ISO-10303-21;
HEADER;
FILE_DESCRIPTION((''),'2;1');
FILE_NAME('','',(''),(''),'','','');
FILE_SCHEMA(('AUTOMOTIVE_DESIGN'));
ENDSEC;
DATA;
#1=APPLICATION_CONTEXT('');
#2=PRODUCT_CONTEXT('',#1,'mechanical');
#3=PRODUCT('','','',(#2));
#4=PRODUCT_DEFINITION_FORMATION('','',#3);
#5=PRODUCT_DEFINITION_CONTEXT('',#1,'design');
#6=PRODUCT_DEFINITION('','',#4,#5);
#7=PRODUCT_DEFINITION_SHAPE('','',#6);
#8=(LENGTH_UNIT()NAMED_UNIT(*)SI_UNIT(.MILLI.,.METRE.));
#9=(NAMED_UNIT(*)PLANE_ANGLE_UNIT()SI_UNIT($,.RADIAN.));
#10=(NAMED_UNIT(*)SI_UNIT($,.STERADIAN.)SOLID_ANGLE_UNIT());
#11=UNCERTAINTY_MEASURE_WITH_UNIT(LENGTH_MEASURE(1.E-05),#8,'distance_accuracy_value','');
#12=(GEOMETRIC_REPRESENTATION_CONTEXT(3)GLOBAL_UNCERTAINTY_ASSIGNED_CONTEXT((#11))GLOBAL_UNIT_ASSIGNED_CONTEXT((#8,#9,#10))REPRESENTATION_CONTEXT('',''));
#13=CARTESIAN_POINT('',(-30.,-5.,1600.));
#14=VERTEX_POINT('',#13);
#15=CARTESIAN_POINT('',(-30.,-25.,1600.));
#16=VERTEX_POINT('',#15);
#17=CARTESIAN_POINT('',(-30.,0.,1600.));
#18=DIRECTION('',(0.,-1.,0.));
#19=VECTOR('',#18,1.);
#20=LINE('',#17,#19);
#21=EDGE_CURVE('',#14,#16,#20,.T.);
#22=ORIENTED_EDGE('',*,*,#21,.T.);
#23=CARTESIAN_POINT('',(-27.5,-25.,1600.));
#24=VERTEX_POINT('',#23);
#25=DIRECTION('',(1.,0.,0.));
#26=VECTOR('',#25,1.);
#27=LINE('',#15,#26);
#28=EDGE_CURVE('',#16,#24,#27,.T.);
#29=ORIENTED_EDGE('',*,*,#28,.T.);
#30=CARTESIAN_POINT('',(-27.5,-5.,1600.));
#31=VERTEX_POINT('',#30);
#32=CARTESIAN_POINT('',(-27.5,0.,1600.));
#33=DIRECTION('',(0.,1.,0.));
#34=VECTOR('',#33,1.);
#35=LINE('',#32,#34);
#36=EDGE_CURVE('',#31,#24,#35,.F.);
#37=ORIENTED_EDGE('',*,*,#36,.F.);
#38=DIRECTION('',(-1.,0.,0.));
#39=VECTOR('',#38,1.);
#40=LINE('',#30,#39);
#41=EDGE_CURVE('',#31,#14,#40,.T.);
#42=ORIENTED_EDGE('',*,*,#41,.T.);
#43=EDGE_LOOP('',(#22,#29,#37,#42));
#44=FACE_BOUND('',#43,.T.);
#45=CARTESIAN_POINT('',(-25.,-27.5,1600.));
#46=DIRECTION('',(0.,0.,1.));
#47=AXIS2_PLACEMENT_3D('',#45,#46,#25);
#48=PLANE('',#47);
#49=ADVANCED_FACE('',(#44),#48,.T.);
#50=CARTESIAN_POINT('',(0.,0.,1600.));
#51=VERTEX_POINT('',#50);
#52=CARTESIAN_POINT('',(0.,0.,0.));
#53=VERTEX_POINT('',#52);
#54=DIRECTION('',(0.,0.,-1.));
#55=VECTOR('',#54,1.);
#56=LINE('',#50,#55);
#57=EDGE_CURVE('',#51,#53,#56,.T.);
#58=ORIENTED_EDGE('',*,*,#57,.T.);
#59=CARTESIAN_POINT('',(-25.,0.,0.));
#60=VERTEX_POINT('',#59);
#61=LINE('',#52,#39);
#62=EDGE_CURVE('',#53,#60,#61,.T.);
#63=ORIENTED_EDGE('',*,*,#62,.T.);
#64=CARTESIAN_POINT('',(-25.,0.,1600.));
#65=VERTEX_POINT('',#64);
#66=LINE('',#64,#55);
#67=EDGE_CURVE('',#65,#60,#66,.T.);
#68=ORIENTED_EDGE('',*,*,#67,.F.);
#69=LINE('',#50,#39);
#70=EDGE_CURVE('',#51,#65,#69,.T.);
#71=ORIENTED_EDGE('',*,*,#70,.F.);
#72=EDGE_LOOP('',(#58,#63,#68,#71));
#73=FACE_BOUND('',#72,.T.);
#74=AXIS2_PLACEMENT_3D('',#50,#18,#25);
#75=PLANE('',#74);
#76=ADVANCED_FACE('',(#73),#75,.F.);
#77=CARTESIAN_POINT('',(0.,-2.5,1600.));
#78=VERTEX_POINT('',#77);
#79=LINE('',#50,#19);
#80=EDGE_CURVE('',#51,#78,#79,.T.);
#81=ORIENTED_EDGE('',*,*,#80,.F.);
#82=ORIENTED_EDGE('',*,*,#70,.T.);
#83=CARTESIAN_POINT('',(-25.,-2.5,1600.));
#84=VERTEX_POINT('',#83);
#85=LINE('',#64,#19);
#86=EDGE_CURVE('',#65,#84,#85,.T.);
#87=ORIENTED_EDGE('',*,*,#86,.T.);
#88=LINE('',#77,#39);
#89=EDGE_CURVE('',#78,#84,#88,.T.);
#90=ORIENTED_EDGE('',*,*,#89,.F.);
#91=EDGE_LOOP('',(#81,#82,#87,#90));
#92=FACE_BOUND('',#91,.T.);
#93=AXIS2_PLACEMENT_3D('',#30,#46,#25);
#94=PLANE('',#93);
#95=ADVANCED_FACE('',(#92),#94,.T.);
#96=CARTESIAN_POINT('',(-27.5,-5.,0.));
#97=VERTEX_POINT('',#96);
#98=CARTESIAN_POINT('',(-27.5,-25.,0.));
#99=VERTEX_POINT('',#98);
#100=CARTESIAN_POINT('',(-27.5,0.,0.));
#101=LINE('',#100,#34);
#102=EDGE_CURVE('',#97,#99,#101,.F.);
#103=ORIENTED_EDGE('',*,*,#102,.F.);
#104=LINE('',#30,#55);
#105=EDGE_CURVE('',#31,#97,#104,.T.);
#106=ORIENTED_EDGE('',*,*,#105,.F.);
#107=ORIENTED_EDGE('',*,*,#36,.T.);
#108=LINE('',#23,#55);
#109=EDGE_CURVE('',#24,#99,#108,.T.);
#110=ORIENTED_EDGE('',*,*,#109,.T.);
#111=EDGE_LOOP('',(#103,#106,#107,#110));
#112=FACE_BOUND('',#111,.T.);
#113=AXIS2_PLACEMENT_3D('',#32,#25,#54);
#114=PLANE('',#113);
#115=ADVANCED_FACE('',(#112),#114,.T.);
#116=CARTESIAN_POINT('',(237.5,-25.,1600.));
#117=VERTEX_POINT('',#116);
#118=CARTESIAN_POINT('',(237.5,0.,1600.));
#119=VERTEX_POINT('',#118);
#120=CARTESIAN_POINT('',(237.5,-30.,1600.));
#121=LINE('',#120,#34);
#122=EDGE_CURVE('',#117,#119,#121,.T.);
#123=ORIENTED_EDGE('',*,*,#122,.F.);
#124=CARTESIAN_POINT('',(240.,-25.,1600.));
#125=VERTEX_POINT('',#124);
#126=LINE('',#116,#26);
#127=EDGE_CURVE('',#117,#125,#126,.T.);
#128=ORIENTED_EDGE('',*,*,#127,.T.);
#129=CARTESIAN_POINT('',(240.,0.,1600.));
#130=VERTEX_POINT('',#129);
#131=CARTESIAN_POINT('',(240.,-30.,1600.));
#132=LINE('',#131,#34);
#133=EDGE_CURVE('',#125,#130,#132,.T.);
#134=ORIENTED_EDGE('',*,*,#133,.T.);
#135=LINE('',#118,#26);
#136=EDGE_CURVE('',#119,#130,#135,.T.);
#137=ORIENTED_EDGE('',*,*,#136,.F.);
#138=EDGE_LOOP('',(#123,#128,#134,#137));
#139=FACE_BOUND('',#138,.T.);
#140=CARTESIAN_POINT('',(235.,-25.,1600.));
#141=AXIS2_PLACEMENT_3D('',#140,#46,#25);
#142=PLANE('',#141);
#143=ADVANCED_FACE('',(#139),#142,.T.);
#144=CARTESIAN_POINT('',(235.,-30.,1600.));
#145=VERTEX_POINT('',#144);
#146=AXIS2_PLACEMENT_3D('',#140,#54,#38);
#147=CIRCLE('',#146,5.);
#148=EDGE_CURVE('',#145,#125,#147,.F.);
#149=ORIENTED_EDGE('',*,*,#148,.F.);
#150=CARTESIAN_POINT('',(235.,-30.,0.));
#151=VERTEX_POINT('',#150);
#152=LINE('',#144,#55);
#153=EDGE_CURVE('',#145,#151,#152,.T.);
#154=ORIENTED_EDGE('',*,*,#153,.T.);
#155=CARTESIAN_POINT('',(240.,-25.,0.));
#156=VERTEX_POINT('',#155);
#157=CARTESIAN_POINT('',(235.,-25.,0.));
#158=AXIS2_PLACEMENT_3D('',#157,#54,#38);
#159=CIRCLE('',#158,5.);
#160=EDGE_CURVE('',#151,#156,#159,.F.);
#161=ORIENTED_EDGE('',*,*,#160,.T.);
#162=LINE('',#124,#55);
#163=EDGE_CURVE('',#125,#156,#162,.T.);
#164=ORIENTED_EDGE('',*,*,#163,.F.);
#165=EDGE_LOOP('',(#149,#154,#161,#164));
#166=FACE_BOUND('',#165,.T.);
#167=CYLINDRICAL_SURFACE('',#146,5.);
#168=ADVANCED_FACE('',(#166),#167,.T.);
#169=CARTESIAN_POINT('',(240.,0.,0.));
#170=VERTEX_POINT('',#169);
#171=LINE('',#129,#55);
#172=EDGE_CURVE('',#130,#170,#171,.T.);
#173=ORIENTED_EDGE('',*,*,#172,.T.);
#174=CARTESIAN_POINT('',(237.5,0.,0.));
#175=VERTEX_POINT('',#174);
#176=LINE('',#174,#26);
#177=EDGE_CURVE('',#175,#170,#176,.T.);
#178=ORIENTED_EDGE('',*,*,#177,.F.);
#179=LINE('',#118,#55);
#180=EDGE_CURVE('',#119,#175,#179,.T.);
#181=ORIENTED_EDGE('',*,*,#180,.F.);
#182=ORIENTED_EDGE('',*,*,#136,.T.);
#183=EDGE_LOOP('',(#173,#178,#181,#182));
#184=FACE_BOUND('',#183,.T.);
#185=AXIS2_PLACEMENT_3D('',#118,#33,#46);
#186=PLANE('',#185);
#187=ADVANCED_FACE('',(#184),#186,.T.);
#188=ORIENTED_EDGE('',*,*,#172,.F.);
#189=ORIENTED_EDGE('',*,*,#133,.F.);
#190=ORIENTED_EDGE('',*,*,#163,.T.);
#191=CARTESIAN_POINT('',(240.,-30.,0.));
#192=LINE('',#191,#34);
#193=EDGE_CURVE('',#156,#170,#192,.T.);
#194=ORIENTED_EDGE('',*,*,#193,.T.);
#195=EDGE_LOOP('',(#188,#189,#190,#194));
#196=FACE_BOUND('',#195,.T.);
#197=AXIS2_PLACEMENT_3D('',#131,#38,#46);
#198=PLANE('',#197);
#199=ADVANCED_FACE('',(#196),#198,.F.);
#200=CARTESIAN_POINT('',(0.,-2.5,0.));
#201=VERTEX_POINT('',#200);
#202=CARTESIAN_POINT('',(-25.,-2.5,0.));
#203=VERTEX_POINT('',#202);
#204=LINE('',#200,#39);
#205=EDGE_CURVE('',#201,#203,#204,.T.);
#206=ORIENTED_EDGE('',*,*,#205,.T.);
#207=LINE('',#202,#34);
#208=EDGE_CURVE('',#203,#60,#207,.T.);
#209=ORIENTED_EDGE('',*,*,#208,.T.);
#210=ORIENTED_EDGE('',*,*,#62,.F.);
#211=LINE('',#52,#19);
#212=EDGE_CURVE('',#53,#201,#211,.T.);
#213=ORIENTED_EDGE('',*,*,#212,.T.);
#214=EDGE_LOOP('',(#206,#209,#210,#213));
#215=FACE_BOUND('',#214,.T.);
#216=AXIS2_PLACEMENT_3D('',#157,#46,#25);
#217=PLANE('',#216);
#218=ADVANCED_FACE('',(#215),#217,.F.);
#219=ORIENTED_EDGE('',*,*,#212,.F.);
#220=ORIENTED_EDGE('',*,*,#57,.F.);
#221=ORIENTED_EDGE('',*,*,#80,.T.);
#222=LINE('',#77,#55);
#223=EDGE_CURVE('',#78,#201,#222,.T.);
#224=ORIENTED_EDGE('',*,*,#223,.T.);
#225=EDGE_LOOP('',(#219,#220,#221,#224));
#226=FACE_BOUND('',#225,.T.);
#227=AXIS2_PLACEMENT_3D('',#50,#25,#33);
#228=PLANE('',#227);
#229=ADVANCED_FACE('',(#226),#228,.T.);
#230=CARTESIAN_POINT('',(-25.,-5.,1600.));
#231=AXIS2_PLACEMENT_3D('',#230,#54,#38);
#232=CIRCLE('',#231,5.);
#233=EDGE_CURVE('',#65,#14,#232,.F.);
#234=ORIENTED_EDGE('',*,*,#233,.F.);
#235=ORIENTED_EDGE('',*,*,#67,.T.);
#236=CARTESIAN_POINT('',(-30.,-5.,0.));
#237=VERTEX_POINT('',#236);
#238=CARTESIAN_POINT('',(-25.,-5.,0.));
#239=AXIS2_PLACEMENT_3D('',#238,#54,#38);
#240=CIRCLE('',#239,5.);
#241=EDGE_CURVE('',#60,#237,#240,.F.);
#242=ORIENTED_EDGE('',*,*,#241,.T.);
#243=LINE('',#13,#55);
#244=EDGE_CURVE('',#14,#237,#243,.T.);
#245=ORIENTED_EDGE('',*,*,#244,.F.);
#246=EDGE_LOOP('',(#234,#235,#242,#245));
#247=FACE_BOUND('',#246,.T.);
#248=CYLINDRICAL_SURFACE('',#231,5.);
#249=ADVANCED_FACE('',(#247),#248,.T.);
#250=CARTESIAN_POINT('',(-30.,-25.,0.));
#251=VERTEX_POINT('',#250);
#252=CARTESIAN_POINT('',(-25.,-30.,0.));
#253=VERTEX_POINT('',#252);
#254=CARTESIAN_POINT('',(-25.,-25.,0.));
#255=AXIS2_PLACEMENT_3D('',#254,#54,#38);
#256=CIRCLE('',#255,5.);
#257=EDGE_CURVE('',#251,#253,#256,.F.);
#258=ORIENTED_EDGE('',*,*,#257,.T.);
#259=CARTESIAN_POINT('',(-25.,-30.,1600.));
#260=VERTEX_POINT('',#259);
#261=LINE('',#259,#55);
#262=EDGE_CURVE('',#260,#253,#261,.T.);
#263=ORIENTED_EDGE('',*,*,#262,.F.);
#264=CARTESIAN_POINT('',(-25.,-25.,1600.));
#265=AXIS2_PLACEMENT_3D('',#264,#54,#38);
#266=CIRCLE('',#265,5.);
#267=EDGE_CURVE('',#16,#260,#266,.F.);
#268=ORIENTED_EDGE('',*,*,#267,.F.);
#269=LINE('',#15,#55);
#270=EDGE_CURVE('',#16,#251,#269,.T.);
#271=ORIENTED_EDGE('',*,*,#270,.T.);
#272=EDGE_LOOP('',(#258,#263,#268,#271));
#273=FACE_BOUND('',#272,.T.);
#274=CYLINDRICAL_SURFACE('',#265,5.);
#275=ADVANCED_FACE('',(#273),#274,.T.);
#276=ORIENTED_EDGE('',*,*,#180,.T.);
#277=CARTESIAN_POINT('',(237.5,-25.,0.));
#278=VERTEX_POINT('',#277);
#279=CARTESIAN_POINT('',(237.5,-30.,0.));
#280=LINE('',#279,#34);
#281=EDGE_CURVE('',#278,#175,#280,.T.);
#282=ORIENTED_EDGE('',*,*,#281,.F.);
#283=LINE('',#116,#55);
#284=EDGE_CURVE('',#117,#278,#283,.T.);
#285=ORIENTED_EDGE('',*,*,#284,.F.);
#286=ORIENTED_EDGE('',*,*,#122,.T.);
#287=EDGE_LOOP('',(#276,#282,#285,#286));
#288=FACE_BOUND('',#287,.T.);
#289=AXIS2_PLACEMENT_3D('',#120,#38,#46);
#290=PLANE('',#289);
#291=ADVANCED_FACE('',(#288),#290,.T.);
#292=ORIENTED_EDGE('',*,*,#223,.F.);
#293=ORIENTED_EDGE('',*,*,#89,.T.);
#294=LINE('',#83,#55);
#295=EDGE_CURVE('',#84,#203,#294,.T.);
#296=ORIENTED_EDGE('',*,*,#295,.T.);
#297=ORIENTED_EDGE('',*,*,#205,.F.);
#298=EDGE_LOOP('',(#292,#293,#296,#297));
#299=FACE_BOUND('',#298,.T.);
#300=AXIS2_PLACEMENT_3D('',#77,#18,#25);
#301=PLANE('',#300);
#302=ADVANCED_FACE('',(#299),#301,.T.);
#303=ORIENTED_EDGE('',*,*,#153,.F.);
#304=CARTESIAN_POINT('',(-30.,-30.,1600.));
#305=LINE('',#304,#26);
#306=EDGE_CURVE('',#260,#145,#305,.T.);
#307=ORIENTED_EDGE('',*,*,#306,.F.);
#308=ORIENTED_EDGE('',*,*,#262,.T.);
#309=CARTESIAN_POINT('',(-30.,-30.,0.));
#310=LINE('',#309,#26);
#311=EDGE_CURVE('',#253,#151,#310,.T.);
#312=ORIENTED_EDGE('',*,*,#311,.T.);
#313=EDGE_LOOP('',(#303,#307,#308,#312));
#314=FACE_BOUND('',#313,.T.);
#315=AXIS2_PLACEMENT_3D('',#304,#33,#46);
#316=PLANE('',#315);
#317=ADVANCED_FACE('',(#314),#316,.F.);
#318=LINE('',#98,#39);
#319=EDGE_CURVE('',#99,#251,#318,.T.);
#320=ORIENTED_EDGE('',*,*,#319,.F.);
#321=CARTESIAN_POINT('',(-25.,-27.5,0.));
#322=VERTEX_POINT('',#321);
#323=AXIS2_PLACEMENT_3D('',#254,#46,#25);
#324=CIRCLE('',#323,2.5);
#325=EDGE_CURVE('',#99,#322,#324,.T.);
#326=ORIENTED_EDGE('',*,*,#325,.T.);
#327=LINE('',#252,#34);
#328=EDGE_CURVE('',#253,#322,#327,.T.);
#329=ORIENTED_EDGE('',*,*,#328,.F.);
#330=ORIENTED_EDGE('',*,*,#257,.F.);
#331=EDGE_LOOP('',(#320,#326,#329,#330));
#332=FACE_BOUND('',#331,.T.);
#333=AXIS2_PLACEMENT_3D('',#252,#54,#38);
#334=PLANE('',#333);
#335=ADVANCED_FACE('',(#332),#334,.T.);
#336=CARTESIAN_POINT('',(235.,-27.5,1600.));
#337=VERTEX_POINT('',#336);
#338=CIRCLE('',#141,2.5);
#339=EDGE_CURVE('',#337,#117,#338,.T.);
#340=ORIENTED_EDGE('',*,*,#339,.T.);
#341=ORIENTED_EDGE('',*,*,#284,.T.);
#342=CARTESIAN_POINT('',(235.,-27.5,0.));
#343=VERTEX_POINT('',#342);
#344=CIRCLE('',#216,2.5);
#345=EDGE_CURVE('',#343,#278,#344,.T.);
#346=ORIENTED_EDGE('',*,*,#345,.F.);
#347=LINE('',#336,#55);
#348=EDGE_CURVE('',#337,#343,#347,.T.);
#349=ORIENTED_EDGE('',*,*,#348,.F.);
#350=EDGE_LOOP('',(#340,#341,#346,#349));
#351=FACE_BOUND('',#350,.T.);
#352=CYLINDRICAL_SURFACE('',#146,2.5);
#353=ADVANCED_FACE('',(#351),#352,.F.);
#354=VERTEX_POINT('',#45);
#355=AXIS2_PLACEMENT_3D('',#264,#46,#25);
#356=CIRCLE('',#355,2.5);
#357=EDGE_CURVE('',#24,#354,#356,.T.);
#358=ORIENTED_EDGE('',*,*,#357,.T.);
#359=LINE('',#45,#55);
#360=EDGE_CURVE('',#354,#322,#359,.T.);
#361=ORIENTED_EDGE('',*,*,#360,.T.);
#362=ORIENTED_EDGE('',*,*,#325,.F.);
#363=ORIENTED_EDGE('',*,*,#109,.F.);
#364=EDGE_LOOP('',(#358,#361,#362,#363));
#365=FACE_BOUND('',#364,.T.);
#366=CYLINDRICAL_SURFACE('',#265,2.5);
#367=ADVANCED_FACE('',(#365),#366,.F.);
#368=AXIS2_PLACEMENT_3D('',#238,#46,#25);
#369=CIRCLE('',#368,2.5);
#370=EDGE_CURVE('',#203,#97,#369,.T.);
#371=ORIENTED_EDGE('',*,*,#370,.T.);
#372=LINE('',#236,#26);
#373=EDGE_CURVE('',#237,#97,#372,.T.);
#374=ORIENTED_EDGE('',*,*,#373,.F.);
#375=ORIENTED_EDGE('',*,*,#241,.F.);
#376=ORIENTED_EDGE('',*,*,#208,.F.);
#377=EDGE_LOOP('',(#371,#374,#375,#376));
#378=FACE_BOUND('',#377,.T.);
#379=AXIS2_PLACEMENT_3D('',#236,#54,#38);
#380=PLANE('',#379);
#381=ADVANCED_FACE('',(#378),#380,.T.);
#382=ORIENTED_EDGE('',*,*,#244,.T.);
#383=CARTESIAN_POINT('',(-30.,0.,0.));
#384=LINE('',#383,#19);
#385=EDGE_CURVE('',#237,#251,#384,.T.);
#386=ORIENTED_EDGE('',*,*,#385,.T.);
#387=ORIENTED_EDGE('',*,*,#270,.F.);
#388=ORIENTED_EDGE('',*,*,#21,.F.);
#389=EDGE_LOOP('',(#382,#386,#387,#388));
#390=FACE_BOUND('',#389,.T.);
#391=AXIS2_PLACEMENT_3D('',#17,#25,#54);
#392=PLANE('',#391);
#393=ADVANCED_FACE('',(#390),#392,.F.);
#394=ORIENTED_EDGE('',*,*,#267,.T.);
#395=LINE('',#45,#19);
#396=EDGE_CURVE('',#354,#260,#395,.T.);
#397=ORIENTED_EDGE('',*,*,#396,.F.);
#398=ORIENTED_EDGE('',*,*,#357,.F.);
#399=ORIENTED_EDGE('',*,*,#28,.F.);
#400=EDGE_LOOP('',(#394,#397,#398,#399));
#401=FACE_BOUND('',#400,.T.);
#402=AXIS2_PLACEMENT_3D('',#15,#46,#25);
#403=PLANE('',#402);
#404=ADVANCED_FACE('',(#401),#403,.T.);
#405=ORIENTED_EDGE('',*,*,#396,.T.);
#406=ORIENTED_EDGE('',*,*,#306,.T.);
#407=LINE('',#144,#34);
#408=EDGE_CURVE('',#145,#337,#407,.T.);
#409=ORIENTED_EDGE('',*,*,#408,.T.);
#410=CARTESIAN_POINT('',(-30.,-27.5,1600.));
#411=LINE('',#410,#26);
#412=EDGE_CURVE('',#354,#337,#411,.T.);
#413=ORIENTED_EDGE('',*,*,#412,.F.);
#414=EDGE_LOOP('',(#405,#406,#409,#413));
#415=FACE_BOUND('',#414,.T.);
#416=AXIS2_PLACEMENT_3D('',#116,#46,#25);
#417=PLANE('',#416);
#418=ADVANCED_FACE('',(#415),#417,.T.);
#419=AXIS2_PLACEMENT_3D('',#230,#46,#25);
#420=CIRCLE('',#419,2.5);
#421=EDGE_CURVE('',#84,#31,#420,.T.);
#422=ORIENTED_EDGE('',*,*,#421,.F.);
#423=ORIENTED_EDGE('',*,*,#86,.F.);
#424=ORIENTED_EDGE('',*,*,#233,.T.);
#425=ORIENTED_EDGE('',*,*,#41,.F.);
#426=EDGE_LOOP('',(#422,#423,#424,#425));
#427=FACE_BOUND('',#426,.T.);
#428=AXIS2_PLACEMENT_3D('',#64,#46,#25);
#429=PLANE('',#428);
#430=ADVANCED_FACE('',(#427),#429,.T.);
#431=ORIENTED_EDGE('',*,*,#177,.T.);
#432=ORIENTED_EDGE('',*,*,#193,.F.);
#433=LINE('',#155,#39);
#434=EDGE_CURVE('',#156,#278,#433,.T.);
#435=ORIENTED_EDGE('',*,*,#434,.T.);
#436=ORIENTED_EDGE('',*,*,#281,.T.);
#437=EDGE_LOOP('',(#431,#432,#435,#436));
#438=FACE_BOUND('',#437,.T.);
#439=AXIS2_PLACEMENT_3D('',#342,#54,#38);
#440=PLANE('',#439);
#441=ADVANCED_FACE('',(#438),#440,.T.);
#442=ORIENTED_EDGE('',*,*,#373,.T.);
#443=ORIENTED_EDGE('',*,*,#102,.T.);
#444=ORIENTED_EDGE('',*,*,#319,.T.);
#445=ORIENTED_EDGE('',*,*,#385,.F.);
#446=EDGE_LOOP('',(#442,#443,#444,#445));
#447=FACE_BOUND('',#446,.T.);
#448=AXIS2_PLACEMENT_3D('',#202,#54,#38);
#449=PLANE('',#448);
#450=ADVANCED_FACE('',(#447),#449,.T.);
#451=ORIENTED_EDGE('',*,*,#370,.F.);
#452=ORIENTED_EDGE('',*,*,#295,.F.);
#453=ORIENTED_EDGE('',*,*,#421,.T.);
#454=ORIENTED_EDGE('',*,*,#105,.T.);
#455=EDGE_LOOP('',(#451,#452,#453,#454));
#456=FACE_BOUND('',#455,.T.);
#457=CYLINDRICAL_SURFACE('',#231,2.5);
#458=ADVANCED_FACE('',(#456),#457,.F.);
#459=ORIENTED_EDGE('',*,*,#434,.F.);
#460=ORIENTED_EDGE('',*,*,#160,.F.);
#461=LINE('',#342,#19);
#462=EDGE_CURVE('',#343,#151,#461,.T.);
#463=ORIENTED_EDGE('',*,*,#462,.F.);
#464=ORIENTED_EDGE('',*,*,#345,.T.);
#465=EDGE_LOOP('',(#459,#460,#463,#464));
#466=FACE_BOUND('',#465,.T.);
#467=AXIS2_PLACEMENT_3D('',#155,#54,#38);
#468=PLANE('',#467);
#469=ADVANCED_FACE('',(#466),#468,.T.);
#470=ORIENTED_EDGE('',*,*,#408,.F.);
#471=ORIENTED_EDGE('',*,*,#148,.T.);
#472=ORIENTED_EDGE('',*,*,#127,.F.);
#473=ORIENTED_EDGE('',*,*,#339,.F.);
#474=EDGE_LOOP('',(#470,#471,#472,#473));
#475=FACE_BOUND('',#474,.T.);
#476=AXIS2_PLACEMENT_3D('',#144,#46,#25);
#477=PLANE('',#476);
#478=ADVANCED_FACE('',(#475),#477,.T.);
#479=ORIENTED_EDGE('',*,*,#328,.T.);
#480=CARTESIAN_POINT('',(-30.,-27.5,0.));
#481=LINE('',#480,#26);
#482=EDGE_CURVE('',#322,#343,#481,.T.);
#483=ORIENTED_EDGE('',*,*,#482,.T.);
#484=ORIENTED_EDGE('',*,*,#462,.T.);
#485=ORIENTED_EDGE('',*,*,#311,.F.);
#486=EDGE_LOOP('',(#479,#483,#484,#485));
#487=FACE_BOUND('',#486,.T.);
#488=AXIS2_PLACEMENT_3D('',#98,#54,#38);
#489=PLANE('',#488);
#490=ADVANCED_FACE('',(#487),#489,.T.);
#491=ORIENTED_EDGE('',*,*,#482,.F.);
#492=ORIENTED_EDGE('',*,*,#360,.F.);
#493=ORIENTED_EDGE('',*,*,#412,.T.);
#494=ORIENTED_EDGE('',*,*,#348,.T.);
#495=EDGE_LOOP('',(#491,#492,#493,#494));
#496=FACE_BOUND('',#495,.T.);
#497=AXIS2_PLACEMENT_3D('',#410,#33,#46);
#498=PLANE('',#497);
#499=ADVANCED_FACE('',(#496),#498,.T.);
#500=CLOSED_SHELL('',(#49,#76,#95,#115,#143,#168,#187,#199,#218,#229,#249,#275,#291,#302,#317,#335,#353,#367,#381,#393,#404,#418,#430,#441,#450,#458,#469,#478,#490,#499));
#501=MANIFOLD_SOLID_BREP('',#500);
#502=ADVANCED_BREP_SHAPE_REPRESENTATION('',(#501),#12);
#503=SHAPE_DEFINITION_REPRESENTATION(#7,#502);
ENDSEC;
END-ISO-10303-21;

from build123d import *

# Parameters (mm, degrees)
TABAN_FLAN_1_DEPTH = 1600


# Sheet-metal steps are written as plain solids
with BuildPart() as part:
    # Çizim1 → Taban-Flanş1 (new body)
    with BuildSketch(Plane.XY):
        with BuildLine():
            Line((0, 0), (-25, 0))
            ThreePointArc((-25, 0), (-28.535533906, -1.464466094), (-30, -5))
            Line((-30, -5), (-30, -25))
            ThreePointArc((-30, -25), (-28.535533906, -28.535533906), (-25, -30))
            Line((-25, -30), (235, -30))
            ThreePointArc((235, -30), (238.535533906, -28.535533906), (240, -25))
            Line((240, -25), (240, 0))
            Line((240, 0), (237.5, 0))
            Line((237.5, 0), (237.5, -25))
            ThreePointArc((237.5, -25), (236.767766953, -26.767766953), (235, -27.5))
            Line((235, -27.5), (-25, -27.5))
            ThreePointArc((-25, -27.5), (-26.767766953, -26.767766953), (-27.5, -25))
            Line((-27.5, -25), (-27.5, -5))
            ThreePointArc((-27.5, -5), (-26.767766953, -3.232233047), (-25, -2.5))
            Line((-25, -2.5), (0, -2.5))
            Line((0, -2.5), (0, 0))
        make_face()
    extrude(amount=TABAN_FLAN_1_DEPTH)


solid = part.part
